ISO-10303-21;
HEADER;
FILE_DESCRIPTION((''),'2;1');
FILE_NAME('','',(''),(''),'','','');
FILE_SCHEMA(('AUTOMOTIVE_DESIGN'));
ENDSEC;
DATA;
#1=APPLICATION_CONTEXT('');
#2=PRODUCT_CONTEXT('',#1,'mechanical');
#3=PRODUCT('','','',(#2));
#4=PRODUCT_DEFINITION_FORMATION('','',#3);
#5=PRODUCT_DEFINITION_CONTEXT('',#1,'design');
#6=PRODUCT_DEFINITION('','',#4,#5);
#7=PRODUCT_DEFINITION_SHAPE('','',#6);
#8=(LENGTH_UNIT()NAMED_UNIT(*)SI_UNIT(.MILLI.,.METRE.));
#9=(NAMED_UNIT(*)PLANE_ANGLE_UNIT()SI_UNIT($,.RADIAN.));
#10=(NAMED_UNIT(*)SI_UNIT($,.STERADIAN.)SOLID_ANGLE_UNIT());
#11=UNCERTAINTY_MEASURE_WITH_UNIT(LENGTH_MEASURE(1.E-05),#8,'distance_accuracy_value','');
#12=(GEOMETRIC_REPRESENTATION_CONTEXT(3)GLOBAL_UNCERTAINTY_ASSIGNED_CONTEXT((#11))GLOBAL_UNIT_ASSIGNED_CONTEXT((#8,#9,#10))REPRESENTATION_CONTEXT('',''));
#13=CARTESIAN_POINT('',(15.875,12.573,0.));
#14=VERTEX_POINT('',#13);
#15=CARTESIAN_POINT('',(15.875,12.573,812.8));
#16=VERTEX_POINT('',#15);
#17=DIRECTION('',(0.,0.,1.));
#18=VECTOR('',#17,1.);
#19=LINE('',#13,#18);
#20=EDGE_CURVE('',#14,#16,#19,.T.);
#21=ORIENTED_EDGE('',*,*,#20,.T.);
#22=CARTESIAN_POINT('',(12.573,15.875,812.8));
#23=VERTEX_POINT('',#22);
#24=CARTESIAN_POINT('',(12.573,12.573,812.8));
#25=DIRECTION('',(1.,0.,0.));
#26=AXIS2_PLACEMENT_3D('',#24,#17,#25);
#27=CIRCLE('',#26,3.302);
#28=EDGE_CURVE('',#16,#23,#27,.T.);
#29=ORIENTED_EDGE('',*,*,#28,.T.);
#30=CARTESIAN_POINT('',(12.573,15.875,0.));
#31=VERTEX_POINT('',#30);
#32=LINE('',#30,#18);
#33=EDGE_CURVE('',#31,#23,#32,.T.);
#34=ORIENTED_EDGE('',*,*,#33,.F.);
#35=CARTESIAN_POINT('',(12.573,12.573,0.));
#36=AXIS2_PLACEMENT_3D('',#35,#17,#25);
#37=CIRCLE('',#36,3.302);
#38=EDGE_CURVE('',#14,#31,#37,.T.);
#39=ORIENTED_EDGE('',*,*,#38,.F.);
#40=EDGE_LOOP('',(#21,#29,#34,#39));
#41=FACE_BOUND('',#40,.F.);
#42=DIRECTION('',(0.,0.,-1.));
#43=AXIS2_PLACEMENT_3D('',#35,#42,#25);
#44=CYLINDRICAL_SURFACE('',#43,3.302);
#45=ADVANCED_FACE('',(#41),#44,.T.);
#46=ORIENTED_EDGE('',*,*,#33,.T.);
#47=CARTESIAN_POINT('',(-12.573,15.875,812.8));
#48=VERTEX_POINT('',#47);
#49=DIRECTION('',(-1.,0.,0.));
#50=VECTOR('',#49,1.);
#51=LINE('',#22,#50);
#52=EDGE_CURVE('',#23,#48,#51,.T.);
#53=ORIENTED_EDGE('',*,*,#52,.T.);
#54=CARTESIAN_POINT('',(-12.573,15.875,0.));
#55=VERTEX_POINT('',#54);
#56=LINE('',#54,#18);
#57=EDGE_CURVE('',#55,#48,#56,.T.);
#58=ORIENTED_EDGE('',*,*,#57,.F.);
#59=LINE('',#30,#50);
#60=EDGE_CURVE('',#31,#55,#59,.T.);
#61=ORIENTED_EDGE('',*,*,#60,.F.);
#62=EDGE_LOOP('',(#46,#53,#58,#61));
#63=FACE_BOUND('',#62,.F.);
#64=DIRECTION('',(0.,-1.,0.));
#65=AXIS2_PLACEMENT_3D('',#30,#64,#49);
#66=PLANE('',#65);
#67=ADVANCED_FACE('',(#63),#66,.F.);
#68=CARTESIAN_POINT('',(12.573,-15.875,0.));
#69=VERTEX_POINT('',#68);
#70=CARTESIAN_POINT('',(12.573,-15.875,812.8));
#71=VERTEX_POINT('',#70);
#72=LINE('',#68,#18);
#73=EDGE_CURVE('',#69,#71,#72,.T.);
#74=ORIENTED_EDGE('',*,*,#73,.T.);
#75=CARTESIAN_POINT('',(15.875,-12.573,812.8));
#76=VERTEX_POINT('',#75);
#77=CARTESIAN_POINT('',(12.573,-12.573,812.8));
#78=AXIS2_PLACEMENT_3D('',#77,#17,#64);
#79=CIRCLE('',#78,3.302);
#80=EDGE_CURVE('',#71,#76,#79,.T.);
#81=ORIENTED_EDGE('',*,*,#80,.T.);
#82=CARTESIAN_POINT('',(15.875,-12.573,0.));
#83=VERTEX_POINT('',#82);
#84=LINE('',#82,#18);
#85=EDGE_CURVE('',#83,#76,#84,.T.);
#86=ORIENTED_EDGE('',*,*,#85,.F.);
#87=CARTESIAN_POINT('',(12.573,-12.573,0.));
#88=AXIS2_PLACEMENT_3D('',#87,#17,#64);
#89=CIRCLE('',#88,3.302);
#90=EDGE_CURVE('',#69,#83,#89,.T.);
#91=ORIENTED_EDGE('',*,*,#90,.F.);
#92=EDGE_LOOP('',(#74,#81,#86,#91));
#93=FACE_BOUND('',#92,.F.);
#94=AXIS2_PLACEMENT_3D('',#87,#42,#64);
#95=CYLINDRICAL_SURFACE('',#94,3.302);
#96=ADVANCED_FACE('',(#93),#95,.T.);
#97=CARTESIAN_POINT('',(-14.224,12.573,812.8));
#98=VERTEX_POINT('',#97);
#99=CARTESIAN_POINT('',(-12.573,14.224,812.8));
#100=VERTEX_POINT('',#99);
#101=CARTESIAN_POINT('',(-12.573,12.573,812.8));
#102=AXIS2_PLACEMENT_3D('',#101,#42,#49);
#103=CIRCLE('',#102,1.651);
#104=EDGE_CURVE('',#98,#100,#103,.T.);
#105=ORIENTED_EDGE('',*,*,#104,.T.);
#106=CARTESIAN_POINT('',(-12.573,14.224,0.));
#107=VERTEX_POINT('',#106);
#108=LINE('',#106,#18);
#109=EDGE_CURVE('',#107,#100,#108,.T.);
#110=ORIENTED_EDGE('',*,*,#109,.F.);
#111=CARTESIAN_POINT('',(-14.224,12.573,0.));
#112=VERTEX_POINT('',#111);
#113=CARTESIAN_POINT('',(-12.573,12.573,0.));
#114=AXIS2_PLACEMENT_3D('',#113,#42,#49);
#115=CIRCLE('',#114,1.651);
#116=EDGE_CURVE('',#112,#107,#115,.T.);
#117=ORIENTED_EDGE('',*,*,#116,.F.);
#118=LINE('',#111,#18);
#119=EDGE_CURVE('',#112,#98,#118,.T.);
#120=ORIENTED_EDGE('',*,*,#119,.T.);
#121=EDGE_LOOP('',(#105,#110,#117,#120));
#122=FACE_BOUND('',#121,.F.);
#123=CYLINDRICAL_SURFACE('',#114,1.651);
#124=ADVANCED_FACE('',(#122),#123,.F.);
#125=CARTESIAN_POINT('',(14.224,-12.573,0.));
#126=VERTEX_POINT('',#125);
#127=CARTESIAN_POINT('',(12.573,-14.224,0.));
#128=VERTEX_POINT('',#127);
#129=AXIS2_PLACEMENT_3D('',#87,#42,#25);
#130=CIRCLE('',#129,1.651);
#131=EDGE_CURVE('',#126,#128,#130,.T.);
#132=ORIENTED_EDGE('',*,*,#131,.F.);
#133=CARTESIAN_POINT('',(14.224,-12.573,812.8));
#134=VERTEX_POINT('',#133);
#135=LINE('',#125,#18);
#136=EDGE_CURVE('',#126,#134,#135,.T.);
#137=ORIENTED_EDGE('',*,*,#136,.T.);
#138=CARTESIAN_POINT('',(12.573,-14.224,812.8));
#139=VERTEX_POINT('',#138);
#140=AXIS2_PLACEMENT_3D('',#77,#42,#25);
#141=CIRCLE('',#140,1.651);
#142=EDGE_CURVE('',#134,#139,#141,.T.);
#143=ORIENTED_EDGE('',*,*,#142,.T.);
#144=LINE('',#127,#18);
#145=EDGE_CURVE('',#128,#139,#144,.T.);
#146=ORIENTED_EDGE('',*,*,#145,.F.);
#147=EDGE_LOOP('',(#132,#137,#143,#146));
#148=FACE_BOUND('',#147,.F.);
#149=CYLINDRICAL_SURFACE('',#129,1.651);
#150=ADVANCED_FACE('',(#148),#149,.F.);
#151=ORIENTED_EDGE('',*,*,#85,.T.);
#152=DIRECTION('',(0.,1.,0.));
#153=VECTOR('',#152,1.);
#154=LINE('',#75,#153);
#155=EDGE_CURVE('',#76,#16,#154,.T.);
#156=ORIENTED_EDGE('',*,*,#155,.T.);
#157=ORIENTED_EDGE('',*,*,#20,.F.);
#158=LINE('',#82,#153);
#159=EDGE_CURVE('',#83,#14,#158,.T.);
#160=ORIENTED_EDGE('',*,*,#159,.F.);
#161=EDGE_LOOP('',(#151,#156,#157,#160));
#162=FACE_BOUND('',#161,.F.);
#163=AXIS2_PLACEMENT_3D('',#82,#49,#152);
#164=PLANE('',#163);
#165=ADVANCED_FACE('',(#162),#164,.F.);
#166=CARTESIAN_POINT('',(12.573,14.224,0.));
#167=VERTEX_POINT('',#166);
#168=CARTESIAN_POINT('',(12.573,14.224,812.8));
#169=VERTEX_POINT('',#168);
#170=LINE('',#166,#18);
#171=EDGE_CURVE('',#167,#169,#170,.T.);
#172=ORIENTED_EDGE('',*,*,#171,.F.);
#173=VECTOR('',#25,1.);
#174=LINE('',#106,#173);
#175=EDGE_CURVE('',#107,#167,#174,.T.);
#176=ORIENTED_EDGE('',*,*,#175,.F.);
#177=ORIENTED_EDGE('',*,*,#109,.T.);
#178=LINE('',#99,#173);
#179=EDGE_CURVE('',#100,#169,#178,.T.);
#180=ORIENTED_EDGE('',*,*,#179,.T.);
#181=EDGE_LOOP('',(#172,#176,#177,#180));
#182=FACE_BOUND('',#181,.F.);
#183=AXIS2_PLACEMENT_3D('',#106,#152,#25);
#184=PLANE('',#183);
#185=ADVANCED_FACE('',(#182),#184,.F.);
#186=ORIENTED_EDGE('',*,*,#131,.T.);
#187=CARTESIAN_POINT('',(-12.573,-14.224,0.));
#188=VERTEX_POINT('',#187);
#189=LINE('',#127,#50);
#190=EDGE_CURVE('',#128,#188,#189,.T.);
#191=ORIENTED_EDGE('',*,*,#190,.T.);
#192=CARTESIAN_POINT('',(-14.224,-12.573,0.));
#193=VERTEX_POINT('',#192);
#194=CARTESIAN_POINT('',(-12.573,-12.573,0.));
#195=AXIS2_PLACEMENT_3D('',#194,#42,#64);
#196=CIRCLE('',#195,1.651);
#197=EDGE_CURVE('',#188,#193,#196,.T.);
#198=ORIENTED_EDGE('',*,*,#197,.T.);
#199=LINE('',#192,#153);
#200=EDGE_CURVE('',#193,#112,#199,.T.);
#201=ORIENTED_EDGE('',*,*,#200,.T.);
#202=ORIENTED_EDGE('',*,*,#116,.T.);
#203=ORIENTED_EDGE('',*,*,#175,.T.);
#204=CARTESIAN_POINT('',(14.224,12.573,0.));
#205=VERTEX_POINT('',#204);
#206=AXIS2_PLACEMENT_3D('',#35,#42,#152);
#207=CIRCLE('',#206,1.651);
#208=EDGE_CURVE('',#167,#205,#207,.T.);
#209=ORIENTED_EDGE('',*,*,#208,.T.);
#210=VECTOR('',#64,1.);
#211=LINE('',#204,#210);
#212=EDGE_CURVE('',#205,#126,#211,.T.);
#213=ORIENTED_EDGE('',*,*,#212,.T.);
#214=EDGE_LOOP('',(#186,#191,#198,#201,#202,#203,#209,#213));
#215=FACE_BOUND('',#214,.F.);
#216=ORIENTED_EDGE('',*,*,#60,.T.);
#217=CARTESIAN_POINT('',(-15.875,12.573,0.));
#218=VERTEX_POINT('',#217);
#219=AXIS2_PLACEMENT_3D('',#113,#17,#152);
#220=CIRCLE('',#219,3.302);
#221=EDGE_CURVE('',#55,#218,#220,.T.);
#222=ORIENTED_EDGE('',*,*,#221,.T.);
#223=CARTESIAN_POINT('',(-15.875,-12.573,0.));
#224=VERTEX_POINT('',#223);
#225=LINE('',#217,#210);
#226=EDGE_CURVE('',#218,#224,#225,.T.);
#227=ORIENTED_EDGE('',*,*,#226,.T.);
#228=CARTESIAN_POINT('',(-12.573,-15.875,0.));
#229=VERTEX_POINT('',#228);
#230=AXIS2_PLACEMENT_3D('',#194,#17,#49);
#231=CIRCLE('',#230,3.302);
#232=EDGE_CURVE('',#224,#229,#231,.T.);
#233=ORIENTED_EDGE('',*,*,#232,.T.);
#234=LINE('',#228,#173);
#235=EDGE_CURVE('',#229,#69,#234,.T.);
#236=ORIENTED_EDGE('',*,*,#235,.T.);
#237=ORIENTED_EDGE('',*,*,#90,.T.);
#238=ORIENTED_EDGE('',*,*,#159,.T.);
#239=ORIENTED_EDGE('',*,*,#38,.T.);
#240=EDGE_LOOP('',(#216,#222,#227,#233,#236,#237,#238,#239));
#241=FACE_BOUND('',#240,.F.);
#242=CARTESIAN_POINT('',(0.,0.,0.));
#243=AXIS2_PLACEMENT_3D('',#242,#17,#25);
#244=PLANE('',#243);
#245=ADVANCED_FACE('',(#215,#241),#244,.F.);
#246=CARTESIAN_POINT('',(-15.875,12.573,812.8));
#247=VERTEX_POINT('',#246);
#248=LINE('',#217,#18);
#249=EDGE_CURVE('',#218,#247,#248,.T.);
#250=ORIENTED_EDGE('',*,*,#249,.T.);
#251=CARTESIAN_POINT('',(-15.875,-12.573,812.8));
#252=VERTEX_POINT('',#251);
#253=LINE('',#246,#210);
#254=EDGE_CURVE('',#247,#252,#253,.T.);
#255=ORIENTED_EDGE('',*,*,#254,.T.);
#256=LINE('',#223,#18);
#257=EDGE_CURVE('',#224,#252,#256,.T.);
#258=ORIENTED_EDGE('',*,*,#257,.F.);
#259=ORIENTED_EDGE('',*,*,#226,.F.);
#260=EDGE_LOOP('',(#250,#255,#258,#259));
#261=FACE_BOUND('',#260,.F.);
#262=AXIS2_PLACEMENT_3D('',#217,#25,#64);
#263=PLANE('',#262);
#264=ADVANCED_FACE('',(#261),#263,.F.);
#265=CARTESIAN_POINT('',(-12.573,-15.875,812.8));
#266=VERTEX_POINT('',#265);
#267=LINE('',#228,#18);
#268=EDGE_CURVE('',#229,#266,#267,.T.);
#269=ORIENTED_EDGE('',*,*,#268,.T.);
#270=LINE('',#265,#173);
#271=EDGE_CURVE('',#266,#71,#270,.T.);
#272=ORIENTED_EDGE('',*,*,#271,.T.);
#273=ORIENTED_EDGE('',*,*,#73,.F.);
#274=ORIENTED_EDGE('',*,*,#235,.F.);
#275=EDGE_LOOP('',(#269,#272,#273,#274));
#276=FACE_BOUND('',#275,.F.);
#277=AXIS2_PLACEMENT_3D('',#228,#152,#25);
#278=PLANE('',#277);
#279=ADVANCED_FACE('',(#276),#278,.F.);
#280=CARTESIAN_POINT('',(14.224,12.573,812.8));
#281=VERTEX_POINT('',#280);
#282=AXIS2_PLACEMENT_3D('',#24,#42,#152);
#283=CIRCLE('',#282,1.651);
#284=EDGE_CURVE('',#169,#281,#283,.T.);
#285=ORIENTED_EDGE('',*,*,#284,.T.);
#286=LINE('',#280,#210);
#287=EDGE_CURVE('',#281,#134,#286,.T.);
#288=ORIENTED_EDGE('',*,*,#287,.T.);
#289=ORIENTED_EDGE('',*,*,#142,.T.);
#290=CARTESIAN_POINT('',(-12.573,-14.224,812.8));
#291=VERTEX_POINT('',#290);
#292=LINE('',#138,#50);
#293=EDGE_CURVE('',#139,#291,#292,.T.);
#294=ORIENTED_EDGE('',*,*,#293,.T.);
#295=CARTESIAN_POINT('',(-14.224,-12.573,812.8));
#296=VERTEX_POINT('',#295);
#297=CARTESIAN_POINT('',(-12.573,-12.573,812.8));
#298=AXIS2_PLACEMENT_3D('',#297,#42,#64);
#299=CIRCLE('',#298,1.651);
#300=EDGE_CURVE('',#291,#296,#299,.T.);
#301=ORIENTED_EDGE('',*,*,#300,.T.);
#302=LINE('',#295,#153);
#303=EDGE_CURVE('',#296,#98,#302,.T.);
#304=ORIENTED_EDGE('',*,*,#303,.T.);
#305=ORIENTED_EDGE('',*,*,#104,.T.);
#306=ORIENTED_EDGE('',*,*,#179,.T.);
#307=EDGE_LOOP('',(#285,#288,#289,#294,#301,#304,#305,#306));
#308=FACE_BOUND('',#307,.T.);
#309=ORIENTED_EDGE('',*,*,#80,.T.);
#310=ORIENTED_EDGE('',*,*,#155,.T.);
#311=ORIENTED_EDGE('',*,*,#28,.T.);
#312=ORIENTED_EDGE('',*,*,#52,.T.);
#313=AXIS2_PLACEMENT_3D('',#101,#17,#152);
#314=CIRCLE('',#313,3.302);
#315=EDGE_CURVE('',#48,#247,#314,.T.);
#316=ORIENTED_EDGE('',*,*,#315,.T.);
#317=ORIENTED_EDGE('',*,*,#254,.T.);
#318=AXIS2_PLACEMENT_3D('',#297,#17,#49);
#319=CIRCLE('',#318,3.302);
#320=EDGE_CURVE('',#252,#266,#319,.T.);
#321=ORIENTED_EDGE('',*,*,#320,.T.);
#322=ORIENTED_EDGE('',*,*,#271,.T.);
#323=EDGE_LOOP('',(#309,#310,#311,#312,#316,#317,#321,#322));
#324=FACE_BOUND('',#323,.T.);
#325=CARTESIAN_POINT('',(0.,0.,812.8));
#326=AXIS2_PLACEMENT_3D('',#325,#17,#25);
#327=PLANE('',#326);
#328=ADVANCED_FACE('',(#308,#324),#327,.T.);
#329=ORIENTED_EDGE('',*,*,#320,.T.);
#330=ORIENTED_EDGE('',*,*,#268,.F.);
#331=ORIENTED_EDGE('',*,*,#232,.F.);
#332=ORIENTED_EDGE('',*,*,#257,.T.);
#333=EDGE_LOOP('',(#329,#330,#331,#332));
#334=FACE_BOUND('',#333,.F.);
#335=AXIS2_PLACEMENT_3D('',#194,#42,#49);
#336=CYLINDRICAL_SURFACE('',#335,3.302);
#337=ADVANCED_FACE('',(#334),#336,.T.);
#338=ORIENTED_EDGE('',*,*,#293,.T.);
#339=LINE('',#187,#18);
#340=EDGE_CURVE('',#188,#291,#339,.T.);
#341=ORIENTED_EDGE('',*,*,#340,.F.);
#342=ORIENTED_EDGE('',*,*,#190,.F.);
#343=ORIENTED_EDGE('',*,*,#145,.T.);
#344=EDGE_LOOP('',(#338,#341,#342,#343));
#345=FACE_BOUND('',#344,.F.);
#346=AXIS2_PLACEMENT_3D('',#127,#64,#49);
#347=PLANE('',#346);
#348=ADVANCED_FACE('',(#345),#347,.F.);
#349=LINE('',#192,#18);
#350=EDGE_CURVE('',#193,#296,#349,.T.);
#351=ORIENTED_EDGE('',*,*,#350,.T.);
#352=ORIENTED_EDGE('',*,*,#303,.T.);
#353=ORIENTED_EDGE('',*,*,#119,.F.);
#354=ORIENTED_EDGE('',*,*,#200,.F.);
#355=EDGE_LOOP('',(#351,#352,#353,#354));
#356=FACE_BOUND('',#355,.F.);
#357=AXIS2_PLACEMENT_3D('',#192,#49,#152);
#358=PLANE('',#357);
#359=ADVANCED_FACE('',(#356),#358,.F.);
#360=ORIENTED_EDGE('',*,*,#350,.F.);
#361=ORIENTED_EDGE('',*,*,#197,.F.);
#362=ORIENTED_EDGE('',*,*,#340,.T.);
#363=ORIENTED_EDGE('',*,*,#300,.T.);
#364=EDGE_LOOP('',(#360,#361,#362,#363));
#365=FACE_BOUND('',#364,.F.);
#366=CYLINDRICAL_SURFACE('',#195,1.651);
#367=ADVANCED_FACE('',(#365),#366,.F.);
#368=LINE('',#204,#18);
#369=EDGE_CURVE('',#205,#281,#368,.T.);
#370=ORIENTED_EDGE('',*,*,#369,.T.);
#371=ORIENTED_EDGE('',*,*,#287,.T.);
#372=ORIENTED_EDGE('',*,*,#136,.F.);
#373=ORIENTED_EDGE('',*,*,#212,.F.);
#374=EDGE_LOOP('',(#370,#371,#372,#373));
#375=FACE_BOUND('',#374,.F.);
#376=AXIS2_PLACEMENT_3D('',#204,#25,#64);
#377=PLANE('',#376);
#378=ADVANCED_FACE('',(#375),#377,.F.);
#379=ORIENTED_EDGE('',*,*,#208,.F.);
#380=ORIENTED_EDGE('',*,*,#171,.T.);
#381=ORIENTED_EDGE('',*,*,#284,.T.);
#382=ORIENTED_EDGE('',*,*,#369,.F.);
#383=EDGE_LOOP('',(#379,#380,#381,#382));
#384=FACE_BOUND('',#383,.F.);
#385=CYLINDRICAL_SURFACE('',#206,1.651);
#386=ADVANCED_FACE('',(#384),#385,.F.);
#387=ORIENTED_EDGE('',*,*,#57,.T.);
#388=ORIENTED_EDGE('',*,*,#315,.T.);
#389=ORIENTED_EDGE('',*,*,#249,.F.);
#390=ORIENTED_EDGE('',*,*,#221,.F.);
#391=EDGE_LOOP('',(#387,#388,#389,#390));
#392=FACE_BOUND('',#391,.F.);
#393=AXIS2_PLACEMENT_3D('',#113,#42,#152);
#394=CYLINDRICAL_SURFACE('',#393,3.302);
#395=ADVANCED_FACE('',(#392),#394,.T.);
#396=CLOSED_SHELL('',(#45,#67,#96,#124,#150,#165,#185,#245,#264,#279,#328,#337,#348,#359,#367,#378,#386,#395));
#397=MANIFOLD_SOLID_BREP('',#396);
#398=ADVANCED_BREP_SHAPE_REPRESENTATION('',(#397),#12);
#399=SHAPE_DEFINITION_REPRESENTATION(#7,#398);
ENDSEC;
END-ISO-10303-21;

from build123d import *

# Parameters (mm, degrees)
F2_DEPTH = 812.8


# Not quite as in the source:
# - a variable given as a bare number and used for a length is read in inches; the dataset says mm whatever the document's units were


with BuildPart() as f2:
    # F0 (on Top) → F2 (new body)
    with BuildSketch(Plane.XY):
        with BuildLine():
            Line((-12.573, -15.875), (12.573, -15.875))
            ThreePointArc((12.573, -15.875), (14.9078665915, -14.9078665915), (15.875, -12.573))
            Line((15.875, -12.573), (15.875, 12.573))
            ThreePointArc((15.875, 12.573), (14.9078665915, 14.9078665915), (12.573, 15.875))
            Line((12.573, 15.875), (-12.573, 15.875))
            ThreePointArc((-12.573, 15.875), (-14.9078665915, 14.9078665915), (-15.875, 12.573))
            Line((-15.875, 12.573), (-15.875, -12.573))
            ThreePointArc((-15.875, -12.573), (-14.9078665915, -14.9078665915), (-12.573, -15.875))
        make_face()
        with BuildLine():
            Line((-12.573, 14.224), (12.573, 14.224))
            ThreePointArc((12.573, 14.224), (13.7404332957, 13.7404332957), (14.224, 12.573))
            Line((14.224, 12.573), (14.224, -12.573))
            ThreePointArc((14.224, -12.573), (13.7404332957, -13.7404332957), (12.573, -14.224))
            Line((12.573, -14.224), (-12.573, -14.224))
            ThreePointArc((-12.573, -14.224), (-13.7404332957, -13.7404332957), (-14.224, -12.573))
            Line((-14.224, -12.573), (-14.224, 12.573))
            ThreePointArc((-14.224, 12.573), (-13.7404332957, 13.7404332957), (-12.573, 14.224))
        make_face(mode=Mode.SUBTRACT)
    extrude(amount=F2_DEPTH)


solid = f2.part
